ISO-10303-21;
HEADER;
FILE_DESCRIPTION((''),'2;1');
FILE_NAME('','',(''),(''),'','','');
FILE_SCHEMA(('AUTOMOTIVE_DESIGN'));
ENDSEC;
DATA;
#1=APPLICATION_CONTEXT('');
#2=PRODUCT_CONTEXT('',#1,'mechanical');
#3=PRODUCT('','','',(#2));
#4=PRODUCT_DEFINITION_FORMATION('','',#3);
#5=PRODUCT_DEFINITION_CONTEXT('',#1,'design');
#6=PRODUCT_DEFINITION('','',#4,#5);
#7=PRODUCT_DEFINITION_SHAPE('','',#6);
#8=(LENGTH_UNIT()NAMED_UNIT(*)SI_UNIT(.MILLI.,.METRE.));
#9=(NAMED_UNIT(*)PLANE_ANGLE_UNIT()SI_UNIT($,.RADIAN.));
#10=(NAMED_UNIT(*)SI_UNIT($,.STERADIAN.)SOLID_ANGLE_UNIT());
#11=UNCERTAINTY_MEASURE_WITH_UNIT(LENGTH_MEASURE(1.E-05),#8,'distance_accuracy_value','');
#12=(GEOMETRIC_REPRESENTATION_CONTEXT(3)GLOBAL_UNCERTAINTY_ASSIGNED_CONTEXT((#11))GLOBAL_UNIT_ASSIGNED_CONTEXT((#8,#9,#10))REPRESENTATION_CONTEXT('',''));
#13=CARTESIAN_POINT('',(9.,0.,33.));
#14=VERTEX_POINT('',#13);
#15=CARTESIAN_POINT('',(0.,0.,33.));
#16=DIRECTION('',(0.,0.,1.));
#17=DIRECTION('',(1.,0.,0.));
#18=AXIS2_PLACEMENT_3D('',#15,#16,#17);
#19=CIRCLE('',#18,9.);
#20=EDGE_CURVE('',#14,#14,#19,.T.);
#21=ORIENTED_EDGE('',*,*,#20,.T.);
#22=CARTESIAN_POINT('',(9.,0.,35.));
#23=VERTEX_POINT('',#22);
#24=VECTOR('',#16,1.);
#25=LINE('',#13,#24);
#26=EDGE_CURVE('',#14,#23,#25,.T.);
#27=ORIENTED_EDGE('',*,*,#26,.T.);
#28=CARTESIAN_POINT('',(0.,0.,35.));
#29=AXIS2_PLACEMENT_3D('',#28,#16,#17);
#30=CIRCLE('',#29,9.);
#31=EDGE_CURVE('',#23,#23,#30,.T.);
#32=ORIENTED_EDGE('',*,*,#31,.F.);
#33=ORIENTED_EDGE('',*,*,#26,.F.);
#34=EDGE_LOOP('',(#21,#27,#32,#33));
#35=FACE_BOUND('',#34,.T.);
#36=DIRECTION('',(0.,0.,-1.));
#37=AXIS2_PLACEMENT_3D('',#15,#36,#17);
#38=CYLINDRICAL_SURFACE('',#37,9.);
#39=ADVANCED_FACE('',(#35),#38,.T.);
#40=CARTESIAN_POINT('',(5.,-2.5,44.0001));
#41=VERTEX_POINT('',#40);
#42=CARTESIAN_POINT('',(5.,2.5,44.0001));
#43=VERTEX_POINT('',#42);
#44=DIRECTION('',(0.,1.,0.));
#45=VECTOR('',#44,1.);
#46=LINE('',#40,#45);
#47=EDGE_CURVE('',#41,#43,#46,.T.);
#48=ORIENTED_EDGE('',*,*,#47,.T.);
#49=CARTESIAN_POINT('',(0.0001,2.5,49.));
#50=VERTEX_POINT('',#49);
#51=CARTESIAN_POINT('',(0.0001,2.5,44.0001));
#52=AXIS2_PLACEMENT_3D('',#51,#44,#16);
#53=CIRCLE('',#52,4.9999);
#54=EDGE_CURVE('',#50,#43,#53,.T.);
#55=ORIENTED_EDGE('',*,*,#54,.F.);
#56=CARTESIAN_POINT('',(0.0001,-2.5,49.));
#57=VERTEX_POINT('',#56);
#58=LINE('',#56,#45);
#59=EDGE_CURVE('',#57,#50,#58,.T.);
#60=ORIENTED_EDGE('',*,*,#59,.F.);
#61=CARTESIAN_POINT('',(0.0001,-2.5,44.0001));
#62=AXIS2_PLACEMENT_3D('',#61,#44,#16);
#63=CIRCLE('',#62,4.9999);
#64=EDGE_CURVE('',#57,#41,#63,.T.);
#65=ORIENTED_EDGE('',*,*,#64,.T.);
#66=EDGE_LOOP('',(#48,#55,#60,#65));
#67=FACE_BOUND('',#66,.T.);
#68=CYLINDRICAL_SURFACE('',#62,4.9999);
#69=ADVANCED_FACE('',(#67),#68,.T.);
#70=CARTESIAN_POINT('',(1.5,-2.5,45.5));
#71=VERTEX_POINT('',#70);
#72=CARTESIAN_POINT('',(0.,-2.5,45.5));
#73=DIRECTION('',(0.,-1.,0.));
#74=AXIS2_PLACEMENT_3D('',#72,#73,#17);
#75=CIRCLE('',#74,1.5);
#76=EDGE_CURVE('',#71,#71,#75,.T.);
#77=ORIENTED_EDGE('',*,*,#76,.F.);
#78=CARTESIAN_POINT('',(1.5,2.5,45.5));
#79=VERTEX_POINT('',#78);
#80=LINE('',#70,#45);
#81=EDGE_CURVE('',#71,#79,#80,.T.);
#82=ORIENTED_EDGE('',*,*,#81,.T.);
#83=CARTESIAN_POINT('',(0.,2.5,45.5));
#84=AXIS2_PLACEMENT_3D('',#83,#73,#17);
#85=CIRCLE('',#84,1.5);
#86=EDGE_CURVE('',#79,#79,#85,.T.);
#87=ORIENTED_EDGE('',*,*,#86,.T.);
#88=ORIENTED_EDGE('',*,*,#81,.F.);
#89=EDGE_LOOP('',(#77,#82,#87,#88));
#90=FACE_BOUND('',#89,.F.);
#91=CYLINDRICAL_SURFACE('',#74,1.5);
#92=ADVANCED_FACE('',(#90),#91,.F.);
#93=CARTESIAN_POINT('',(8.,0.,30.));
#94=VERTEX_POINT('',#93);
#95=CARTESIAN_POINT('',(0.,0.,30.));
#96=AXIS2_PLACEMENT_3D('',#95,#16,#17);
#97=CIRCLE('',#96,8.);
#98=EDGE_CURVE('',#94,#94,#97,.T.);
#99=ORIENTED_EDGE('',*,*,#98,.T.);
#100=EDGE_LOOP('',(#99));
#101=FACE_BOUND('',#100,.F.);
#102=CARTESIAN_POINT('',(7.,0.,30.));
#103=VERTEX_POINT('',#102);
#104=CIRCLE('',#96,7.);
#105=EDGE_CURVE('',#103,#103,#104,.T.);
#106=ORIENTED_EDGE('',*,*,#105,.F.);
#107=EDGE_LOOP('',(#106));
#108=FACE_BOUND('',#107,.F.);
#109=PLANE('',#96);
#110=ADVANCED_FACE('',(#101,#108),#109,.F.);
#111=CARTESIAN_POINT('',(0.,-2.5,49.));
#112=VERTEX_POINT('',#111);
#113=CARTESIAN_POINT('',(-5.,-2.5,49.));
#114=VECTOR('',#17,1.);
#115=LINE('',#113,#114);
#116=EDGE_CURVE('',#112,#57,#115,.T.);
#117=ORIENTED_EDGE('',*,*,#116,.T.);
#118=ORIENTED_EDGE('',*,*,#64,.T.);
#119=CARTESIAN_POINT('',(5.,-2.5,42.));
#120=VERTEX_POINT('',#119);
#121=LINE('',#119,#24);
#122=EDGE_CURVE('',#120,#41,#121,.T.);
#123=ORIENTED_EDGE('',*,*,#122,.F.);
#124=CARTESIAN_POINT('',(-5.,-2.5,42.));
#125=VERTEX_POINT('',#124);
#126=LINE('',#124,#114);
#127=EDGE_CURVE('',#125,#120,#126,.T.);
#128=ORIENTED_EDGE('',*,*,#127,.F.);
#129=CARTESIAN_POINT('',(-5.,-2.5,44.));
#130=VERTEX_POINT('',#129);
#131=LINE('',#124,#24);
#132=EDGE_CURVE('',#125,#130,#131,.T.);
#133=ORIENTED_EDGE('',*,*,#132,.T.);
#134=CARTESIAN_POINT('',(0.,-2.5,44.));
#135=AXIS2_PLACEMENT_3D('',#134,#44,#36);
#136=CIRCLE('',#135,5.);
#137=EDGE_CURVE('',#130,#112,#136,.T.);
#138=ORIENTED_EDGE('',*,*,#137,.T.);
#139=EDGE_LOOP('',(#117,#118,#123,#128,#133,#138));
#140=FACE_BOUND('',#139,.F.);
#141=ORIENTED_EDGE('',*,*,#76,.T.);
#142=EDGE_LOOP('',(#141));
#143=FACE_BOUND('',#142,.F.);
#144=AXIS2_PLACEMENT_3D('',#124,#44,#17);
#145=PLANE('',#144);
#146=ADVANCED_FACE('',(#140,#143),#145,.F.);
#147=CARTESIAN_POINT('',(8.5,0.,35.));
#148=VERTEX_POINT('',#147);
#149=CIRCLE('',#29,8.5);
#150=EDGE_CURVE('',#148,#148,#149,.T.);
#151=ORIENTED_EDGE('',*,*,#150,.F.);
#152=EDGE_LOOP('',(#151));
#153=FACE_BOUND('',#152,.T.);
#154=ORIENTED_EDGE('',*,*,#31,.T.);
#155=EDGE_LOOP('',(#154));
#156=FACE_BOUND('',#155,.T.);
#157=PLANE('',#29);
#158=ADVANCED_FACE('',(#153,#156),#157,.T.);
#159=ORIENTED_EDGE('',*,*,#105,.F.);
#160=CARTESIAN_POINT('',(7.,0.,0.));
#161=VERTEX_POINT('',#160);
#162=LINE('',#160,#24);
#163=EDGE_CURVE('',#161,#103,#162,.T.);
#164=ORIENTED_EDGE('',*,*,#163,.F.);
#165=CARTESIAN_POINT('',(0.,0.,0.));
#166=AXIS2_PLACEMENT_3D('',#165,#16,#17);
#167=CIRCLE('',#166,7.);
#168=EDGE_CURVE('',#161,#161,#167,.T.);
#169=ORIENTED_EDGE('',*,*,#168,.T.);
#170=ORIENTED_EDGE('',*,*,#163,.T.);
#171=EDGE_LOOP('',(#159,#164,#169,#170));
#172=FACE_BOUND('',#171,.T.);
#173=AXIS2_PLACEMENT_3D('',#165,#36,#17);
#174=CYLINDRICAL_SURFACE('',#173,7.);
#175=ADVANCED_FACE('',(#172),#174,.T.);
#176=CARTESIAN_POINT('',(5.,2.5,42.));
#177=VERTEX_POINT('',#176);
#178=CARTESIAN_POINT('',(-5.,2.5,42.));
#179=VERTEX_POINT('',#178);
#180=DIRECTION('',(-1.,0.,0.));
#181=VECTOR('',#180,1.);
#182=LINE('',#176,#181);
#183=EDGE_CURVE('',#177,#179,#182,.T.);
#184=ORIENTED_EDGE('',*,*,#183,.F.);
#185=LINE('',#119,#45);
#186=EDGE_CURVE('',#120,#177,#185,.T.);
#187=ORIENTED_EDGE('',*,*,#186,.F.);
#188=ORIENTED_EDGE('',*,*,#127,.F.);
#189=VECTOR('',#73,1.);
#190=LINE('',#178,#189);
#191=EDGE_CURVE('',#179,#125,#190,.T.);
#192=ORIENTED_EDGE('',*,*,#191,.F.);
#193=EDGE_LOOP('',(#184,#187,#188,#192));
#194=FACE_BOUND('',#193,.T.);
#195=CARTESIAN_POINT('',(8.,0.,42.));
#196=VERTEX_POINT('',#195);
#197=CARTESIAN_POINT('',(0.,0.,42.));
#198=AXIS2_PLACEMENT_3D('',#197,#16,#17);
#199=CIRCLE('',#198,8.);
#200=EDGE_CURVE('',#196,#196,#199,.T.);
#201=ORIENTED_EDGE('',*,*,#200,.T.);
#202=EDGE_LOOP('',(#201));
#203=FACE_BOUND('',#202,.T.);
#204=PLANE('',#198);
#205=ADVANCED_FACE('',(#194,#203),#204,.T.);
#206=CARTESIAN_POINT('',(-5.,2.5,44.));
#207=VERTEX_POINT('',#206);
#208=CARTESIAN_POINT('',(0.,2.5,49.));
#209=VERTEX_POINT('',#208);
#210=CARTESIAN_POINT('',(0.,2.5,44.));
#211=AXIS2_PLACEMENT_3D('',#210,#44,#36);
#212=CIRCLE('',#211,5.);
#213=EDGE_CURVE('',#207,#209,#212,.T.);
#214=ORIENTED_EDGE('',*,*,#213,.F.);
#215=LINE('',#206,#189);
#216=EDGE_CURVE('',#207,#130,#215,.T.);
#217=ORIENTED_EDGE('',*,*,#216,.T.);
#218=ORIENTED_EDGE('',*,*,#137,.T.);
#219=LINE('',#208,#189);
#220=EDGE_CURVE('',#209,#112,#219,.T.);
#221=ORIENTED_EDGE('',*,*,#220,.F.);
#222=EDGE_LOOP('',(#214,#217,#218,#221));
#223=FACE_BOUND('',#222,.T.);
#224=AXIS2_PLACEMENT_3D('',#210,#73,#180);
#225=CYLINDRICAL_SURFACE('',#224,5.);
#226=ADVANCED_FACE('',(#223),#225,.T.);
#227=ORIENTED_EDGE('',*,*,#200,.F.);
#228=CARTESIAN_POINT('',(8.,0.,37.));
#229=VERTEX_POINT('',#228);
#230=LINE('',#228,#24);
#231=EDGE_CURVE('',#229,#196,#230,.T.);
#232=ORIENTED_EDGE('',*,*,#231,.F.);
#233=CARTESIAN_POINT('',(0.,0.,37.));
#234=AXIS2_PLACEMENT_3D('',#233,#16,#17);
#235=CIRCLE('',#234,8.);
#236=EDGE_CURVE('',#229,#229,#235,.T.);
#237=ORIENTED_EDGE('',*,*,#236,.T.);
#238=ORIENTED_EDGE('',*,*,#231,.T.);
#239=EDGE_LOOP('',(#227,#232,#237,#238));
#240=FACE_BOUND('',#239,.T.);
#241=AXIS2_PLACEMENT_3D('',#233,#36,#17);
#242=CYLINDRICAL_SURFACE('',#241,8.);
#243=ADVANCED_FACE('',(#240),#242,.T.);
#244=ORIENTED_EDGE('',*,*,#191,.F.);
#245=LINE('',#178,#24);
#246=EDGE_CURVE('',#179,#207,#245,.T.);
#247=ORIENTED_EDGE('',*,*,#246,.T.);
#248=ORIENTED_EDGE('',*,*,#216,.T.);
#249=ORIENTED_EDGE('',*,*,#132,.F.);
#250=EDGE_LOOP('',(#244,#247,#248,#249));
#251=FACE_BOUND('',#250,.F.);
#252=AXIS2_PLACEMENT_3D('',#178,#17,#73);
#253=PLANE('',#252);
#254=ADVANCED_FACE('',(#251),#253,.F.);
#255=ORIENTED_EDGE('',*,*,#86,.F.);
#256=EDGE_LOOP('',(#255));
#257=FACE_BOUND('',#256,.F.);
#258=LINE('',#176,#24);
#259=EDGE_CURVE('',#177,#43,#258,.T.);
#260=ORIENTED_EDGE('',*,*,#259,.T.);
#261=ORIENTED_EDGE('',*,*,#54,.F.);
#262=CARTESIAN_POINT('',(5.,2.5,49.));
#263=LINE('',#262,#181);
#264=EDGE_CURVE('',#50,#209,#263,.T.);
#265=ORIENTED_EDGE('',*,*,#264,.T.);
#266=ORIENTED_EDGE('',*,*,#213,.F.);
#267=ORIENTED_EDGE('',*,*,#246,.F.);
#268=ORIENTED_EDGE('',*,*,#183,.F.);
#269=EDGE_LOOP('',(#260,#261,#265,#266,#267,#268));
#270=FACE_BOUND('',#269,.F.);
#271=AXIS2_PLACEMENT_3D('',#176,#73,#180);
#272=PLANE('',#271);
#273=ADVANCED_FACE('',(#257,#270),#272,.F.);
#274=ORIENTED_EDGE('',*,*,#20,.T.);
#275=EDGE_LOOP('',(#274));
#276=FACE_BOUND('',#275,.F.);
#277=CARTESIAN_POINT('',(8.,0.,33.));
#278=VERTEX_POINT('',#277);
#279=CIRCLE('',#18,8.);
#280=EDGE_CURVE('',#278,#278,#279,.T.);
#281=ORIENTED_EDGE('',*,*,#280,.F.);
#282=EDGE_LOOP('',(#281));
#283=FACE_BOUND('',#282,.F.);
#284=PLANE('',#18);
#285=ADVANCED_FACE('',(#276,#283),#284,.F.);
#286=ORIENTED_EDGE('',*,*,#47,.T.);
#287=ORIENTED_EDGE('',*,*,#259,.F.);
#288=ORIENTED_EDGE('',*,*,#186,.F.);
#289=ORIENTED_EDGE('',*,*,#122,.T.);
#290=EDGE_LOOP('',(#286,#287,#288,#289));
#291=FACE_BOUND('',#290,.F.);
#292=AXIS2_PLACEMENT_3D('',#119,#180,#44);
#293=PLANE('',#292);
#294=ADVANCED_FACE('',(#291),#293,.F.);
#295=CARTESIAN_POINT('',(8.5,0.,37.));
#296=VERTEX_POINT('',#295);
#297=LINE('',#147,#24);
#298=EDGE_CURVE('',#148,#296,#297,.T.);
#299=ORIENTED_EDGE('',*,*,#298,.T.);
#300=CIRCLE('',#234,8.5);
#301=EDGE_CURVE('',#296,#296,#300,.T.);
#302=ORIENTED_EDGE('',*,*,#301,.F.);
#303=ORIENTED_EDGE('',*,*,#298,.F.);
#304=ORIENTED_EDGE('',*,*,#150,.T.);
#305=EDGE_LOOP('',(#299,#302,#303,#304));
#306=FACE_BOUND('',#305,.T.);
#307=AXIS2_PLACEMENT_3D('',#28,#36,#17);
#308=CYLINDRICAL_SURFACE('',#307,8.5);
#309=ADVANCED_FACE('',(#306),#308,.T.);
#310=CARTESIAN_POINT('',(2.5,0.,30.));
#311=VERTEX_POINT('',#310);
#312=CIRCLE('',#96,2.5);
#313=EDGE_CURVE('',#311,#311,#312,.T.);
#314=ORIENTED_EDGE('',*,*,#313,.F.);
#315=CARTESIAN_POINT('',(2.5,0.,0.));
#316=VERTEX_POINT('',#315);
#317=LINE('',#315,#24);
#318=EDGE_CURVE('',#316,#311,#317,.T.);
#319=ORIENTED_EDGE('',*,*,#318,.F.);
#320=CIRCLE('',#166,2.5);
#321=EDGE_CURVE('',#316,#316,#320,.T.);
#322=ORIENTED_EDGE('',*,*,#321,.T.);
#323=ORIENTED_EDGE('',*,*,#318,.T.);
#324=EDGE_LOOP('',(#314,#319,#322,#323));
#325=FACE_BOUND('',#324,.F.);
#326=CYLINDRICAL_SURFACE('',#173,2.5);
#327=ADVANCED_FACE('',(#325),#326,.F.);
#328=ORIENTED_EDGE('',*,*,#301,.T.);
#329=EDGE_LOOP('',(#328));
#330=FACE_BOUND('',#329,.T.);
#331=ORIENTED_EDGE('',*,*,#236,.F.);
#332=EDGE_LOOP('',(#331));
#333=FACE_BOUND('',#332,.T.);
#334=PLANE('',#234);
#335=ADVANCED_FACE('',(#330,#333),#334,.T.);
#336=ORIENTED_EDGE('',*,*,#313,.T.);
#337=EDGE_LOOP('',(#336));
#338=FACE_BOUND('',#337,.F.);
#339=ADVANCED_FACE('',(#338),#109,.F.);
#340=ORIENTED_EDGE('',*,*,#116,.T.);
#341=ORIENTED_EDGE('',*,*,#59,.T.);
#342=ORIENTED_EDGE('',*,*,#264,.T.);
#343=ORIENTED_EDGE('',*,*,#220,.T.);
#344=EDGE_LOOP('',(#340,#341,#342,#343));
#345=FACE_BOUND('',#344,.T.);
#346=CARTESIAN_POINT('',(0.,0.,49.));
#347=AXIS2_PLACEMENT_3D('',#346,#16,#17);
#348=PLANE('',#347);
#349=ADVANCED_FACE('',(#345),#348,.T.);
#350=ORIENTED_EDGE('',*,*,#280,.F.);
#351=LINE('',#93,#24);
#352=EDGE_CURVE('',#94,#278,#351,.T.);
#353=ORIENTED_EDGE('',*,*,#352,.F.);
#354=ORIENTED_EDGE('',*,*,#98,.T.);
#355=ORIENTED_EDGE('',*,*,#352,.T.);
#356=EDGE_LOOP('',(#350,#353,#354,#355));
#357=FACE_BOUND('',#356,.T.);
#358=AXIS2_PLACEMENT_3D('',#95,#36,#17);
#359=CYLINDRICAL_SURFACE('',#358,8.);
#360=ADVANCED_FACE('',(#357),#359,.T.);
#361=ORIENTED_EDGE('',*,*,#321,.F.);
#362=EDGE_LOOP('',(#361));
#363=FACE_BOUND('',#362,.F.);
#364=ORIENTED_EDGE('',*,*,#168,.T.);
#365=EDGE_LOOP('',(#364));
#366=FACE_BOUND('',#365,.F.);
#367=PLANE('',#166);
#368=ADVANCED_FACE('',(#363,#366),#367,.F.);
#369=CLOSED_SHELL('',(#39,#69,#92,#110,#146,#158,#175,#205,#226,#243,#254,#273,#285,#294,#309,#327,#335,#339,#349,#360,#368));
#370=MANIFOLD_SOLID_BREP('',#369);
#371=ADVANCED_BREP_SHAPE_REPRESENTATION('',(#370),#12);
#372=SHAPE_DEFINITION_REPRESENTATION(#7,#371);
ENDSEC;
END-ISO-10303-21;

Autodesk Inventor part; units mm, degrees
ref_plane "YZ Plane" through (0, 0, 0) normal (1, 0, 0) x (0, 1, 0)
ref_plane "XZ Plane" through (0, 0, 0) normal (0, 1, 0) x (-1, 0, 0)
ref_plane "XY Plane" through (0, 0, 0) normal (0, 0, 1) x (1, 0, 0)
sketch "スケッチ1" plane through (0, 0, 0) normal (0, 0, 1) x (1, 0, 0)
  circle A0 centre (0, 0) radius 7
  circle A1 centre (0, 0) radius 2.5
  dimension "d0" = 14
  dimension "d1" = 5
extrude "押し出し1" add sketch "スケッチ1" along normal blind 30
sketch "スケッチ2" plane through (0, 0, 30) normal (0, 0, 1) x (1, 0, 0)
  circle A0 centre (0, 0) radius 8
  dimension "d4" = 16
extrude "押し出し2" add sketch "スケッチ2" along normal blind 3
sketch "スケッチ3" plane through (0, 0, 33) normal (0, 0, 1) x (1, 0, 0)
  circle A0 centre (0, 0) radius 9
  dimension "d7" = 18
extrude "押し出し3" add sketch "スケッチ3" along normal blind 2
sketch "スケッチ4" plane through (0, 0, 35) normal (0, 0, 1) x (1, 0, 0)
  circle A0 centre (0, 0) radius 8.5
  dimension "d10" = 17
extrude "押し出し4" add sketch "スケッチ4" along normal blind 2
sketch "スケッチ5" plane through (0, 0, 37) normal (0, 0, 1) x (1, 0, 0)
  circle A0 centre (0, 0) radius 8
  dimension "d13" = 16
extrude "押し出し5" add sketch "スケッチ5" along normal blind 5
sketch "スケッチ6" plane through (0, 0, 42) normal (0, 0, 1) x (1, 0, 0)
  line L0 (-5, -2.5) -> (5, -2.5)
  line L1 (5, -2.5) -> (5, 2.5)
  line L2 (5, 2.5) -> (-5, 2.5)
  line L3 (-5, 2.5) -> (-5, -2.5)
  line L4 (-5, -2.5) -> (5, 2.5) construction
  line L5 (5, -2.5) -> (-5, 2.5) construction
  point P0 (0, 0)
  dimension "d16" = 10
  dimension "d17" = 5
extrude "押し出し6" add sketch "スケッチ6" along normal blind 7
fillet "フィレット1" radius 5 1 edges at (-5, 0, 49)
fillet "フィレット2" radius 5 1 edges at (5, 0, 49)
sketch "スケッチ7" plane through (-5, -2.5, 42) normal (0, -1, 0) x (1, 0, 0)
  arc A0 (10, 2) -> (0, 2) centre (5, 2) ccw projected
  line L0 (0, 0) -> (0, 2) projected
  line L1 (10, 0) -> (0, 0) projected
  line L2 (10, 0) -> (10, 2) projected
  circle A1 centre (5, 3.5) radius 1.5
  point P0 (5, -42)
  dimension "d22" = 3
  dimension "d23" = 2
extrude "押し出し7" cut sketch "スケッチ7" against normal blind 8 contours A1
properties part number "タミヤダンパー"
